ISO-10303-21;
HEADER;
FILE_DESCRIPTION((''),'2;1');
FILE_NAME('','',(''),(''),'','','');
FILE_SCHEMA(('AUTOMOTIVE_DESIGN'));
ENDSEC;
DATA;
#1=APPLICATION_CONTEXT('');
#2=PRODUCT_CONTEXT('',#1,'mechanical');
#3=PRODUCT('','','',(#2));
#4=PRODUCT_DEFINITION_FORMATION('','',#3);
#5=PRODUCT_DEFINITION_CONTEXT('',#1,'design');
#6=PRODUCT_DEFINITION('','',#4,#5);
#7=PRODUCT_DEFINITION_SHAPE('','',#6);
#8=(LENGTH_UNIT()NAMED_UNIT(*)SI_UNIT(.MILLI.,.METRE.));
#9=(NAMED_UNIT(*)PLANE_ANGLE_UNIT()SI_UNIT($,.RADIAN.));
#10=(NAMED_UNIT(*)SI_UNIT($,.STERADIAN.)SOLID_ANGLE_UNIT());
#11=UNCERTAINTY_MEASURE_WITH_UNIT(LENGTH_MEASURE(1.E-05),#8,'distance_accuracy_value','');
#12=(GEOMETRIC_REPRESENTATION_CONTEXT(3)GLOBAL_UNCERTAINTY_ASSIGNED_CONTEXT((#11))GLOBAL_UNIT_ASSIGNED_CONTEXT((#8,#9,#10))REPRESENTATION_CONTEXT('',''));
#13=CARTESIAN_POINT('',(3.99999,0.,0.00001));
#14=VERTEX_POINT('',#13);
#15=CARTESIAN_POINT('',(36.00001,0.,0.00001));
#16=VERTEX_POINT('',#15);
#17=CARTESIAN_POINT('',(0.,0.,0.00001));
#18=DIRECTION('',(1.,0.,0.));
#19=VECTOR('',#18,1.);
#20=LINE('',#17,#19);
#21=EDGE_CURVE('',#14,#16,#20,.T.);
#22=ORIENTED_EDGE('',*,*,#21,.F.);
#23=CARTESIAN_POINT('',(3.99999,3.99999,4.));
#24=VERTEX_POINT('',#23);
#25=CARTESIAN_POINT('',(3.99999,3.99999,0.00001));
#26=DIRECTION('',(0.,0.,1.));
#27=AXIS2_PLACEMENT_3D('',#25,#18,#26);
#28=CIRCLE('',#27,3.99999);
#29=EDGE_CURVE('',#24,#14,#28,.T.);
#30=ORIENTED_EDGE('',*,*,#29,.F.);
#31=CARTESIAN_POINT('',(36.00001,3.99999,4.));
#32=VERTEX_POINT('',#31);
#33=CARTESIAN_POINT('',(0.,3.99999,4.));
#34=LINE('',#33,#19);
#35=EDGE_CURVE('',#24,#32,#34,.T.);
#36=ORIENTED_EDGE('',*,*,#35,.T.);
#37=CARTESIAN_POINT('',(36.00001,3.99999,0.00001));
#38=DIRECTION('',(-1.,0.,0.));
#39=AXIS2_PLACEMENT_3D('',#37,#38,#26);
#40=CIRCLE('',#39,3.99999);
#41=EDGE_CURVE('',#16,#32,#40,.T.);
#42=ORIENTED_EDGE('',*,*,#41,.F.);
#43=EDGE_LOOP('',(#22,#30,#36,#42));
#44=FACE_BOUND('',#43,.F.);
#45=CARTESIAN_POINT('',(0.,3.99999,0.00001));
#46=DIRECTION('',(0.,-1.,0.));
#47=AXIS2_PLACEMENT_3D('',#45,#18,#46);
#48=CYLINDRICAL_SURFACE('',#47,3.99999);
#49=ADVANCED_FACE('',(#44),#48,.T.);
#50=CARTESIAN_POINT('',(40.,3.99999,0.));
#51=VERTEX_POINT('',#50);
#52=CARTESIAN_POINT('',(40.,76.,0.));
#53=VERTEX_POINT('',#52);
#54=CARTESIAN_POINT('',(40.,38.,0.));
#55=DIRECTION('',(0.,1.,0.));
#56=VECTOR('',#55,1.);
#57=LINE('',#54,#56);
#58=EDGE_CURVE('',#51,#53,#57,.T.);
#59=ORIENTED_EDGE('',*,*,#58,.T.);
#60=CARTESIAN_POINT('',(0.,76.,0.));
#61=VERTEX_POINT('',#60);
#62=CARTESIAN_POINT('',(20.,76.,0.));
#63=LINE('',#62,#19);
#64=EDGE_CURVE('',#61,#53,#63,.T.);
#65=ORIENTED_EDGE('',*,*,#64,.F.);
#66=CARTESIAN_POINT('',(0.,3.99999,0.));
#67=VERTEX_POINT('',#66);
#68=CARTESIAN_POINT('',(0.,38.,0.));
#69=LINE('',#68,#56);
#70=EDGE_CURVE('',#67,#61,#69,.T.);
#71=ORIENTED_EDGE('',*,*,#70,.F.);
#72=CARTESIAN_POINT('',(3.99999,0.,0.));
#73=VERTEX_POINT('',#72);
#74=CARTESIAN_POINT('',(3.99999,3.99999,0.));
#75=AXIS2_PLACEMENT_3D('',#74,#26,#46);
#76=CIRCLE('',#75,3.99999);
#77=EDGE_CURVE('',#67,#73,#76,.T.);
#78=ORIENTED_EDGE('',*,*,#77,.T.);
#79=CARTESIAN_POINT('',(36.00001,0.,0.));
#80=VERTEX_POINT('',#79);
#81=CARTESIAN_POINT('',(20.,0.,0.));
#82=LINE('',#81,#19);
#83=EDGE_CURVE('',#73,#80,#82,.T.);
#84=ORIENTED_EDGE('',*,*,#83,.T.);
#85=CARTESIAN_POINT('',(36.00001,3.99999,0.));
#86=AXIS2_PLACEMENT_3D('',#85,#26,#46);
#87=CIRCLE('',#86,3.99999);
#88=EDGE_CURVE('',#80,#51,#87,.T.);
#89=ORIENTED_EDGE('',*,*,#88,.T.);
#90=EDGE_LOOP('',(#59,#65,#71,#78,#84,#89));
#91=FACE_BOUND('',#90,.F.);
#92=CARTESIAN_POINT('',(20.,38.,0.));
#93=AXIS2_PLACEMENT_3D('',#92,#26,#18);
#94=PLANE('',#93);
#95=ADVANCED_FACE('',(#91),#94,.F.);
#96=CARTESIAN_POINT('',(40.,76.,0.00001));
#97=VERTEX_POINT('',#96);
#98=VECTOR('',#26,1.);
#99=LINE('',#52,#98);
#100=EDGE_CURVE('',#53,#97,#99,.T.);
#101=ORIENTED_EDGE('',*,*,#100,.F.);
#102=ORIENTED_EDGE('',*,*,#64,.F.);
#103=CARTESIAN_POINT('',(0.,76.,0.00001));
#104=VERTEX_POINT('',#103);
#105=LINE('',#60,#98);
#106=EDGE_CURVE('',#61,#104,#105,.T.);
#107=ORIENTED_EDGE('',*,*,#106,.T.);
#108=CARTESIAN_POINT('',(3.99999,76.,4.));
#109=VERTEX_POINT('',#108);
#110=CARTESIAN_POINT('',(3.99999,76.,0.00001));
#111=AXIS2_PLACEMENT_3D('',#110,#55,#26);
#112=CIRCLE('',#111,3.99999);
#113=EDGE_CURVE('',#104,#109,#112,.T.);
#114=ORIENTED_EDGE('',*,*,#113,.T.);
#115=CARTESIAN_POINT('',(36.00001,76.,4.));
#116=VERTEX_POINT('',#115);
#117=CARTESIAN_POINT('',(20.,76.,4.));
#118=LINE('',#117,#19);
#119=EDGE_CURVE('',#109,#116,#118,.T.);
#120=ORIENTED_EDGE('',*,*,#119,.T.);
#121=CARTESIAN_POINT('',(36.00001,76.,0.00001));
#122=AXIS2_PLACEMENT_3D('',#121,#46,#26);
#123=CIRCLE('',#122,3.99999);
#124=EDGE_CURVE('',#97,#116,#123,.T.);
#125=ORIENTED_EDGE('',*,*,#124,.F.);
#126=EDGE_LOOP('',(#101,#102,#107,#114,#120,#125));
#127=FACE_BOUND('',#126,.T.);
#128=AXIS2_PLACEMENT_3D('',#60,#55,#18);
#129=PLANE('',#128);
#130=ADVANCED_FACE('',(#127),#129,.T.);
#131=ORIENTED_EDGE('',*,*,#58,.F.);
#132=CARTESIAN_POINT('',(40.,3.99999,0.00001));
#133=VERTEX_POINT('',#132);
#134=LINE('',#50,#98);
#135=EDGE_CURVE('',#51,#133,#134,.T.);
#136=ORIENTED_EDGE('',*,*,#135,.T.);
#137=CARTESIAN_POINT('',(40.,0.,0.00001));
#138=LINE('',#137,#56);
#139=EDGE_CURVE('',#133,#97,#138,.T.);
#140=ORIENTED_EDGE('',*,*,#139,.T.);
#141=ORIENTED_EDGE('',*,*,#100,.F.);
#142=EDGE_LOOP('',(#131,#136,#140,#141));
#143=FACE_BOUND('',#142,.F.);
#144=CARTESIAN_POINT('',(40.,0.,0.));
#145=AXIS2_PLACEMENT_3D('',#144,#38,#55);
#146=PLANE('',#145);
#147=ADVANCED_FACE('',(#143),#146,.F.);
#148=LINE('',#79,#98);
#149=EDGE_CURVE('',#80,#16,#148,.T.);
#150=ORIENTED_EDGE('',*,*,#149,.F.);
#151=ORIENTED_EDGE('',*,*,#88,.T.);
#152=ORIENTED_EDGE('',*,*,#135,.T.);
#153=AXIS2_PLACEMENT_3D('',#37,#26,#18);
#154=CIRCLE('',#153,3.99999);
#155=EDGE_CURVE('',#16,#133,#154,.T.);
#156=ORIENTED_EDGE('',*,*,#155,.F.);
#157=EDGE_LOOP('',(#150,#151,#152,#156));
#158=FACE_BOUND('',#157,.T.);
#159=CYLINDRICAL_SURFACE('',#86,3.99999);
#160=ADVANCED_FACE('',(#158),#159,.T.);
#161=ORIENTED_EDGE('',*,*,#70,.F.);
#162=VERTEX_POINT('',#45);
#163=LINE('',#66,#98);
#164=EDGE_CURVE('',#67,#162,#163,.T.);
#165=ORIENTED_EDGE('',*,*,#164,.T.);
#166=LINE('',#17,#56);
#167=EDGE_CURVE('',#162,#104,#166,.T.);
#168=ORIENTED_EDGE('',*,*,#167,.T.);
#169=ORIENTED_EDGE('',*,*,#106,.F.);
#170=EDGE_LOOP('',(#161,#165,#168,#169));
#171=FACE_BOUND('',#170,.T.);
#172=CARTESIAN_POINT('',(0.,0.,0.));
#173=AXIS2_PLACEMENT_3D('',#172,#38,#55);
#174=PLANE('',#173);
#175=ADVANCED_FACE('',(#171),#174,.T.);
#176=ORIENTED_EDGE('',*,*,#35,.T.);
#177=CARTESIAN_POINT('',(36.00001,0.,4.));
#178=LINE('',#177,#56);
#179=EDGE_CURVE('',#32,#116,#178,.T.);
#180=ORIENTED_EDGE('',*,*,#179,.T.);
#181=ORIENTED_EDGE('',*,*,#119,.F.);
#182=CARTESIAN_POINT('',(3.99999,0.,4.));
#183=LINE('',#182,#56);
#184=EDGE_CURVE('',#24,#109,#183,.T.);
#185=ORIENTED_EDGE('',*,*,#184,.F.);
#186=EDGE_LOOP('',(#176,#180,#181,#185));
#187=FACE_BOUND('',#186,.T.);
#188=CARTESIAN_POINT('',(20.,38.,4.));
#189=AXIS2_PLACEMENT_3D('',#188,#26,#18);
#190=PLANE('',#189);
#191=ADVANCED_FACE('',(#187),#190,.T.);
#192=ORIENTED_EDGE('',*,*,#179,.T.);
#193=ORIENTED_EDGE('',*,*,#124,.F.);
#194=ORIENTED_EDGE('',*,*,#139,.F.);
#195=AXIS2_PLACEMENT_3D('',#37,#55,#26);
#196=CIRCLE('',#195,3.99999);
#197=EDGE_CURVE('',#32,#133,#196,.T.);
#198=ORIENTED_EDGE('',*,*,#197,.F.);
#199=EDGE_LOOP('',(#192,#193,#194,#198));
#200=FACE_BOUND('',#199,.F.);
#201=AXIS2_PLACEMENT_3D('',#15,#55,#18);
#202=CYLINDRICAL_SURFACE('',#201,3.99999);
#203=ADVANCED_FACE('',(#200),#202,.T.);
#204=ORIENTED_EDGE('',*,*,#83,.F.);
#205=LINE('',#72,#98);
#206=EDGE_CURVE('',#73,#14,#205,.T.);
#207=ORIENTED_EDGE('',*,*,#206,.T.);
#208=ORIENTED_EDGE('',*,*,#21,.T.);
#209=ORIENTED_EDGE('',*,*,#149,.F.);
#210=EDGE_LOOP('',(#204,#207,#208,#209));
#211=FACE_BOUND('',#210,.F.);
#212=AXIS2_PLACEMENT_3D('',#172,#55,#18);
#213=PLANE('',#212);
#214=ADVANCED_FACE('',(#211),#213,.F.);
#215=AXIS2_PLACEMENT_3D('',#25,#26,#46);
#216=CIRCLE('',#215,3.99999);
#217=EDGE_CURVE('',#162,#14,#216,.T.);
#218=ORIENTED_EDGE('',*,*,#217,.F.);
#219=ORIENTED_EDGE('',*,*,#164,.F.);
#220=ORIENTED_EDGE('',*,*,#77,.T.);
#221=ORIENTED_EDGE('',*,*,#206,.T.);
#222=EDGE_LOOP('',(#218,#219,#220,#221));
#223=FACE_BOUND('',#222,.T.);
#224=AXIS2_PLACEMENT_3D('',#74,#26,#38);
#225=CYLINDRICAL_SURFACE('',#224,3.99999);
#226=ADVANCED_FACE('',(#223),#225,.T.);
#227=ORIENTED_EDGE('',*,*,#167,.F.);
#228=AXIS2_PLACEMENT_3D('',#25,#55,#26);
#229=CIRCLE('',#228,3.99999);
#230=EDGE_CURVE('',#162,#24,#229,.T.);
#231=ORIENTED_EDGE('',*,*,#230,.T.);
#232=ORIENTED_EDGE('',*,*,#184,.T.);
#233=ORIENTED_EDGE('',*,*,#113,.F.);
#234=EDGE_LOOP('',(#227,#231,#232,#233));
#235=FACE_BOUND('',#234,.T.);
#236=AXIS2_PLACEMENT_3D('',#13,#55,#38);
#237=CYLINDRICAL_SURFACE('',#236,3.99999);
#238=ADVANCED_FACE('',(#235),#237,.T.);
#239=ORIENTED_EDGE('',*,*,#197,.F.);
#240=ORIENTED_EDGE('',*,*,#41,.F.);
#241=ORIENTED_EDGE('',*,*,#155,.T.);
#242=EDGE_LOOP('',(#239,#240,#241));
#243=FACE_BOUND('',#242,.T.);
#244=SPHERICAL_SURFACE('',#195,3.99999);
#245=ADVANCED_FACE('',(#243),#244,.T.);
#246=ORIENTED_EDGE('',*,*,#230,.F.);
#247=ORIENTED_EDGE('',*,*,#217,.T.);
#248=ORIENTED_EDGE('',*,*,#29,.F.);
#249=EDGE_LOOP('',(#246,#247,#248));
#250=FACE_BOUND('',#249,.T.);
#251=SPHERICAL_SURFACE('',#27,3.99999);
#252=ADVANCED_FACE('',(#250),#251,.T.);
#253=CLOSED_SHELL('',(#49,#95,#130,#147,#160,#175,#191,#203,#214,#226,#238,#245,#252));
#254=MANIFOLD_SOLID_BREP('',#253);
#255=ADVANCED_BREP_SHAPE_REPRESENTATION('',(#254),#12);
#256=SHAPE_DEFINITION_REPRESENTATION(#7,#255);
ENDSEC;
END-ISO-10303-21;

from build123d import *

# Parameters (mm, degrees)
F0_W     = 40
F0_H     = 76
F1_DEPTH = 4
F2_R     = 3.99999


# Not quite as in the source:
# - a fillet or chamfer is up to 0.001 mm smaller than in the source, because OpenCascade refuses the exact size


with BuildPart() as f1:
    # F0 (on Top) → F1 (new body)
    with BuildSketch(Plane.XY):
        with Locations((20, 38)):
            Rectangle(F0_W, F0_H)
    extrude(amount=F1_DEPTH)

    # F2 (radius 4 in the source; OpenCascade refuses exactly that, so slightly less here)
    f2_edges = [f1.edges().sort_by_distance(p)[0] for p in [
        (40, 38, 4),
        (20, 0, 4),
        (0, 38, 4),
        (40, 0, 2),
        (0, 0, 2),
    ]]
    fillet(f2_edges, radius=F2_R)


solid = f1.part
